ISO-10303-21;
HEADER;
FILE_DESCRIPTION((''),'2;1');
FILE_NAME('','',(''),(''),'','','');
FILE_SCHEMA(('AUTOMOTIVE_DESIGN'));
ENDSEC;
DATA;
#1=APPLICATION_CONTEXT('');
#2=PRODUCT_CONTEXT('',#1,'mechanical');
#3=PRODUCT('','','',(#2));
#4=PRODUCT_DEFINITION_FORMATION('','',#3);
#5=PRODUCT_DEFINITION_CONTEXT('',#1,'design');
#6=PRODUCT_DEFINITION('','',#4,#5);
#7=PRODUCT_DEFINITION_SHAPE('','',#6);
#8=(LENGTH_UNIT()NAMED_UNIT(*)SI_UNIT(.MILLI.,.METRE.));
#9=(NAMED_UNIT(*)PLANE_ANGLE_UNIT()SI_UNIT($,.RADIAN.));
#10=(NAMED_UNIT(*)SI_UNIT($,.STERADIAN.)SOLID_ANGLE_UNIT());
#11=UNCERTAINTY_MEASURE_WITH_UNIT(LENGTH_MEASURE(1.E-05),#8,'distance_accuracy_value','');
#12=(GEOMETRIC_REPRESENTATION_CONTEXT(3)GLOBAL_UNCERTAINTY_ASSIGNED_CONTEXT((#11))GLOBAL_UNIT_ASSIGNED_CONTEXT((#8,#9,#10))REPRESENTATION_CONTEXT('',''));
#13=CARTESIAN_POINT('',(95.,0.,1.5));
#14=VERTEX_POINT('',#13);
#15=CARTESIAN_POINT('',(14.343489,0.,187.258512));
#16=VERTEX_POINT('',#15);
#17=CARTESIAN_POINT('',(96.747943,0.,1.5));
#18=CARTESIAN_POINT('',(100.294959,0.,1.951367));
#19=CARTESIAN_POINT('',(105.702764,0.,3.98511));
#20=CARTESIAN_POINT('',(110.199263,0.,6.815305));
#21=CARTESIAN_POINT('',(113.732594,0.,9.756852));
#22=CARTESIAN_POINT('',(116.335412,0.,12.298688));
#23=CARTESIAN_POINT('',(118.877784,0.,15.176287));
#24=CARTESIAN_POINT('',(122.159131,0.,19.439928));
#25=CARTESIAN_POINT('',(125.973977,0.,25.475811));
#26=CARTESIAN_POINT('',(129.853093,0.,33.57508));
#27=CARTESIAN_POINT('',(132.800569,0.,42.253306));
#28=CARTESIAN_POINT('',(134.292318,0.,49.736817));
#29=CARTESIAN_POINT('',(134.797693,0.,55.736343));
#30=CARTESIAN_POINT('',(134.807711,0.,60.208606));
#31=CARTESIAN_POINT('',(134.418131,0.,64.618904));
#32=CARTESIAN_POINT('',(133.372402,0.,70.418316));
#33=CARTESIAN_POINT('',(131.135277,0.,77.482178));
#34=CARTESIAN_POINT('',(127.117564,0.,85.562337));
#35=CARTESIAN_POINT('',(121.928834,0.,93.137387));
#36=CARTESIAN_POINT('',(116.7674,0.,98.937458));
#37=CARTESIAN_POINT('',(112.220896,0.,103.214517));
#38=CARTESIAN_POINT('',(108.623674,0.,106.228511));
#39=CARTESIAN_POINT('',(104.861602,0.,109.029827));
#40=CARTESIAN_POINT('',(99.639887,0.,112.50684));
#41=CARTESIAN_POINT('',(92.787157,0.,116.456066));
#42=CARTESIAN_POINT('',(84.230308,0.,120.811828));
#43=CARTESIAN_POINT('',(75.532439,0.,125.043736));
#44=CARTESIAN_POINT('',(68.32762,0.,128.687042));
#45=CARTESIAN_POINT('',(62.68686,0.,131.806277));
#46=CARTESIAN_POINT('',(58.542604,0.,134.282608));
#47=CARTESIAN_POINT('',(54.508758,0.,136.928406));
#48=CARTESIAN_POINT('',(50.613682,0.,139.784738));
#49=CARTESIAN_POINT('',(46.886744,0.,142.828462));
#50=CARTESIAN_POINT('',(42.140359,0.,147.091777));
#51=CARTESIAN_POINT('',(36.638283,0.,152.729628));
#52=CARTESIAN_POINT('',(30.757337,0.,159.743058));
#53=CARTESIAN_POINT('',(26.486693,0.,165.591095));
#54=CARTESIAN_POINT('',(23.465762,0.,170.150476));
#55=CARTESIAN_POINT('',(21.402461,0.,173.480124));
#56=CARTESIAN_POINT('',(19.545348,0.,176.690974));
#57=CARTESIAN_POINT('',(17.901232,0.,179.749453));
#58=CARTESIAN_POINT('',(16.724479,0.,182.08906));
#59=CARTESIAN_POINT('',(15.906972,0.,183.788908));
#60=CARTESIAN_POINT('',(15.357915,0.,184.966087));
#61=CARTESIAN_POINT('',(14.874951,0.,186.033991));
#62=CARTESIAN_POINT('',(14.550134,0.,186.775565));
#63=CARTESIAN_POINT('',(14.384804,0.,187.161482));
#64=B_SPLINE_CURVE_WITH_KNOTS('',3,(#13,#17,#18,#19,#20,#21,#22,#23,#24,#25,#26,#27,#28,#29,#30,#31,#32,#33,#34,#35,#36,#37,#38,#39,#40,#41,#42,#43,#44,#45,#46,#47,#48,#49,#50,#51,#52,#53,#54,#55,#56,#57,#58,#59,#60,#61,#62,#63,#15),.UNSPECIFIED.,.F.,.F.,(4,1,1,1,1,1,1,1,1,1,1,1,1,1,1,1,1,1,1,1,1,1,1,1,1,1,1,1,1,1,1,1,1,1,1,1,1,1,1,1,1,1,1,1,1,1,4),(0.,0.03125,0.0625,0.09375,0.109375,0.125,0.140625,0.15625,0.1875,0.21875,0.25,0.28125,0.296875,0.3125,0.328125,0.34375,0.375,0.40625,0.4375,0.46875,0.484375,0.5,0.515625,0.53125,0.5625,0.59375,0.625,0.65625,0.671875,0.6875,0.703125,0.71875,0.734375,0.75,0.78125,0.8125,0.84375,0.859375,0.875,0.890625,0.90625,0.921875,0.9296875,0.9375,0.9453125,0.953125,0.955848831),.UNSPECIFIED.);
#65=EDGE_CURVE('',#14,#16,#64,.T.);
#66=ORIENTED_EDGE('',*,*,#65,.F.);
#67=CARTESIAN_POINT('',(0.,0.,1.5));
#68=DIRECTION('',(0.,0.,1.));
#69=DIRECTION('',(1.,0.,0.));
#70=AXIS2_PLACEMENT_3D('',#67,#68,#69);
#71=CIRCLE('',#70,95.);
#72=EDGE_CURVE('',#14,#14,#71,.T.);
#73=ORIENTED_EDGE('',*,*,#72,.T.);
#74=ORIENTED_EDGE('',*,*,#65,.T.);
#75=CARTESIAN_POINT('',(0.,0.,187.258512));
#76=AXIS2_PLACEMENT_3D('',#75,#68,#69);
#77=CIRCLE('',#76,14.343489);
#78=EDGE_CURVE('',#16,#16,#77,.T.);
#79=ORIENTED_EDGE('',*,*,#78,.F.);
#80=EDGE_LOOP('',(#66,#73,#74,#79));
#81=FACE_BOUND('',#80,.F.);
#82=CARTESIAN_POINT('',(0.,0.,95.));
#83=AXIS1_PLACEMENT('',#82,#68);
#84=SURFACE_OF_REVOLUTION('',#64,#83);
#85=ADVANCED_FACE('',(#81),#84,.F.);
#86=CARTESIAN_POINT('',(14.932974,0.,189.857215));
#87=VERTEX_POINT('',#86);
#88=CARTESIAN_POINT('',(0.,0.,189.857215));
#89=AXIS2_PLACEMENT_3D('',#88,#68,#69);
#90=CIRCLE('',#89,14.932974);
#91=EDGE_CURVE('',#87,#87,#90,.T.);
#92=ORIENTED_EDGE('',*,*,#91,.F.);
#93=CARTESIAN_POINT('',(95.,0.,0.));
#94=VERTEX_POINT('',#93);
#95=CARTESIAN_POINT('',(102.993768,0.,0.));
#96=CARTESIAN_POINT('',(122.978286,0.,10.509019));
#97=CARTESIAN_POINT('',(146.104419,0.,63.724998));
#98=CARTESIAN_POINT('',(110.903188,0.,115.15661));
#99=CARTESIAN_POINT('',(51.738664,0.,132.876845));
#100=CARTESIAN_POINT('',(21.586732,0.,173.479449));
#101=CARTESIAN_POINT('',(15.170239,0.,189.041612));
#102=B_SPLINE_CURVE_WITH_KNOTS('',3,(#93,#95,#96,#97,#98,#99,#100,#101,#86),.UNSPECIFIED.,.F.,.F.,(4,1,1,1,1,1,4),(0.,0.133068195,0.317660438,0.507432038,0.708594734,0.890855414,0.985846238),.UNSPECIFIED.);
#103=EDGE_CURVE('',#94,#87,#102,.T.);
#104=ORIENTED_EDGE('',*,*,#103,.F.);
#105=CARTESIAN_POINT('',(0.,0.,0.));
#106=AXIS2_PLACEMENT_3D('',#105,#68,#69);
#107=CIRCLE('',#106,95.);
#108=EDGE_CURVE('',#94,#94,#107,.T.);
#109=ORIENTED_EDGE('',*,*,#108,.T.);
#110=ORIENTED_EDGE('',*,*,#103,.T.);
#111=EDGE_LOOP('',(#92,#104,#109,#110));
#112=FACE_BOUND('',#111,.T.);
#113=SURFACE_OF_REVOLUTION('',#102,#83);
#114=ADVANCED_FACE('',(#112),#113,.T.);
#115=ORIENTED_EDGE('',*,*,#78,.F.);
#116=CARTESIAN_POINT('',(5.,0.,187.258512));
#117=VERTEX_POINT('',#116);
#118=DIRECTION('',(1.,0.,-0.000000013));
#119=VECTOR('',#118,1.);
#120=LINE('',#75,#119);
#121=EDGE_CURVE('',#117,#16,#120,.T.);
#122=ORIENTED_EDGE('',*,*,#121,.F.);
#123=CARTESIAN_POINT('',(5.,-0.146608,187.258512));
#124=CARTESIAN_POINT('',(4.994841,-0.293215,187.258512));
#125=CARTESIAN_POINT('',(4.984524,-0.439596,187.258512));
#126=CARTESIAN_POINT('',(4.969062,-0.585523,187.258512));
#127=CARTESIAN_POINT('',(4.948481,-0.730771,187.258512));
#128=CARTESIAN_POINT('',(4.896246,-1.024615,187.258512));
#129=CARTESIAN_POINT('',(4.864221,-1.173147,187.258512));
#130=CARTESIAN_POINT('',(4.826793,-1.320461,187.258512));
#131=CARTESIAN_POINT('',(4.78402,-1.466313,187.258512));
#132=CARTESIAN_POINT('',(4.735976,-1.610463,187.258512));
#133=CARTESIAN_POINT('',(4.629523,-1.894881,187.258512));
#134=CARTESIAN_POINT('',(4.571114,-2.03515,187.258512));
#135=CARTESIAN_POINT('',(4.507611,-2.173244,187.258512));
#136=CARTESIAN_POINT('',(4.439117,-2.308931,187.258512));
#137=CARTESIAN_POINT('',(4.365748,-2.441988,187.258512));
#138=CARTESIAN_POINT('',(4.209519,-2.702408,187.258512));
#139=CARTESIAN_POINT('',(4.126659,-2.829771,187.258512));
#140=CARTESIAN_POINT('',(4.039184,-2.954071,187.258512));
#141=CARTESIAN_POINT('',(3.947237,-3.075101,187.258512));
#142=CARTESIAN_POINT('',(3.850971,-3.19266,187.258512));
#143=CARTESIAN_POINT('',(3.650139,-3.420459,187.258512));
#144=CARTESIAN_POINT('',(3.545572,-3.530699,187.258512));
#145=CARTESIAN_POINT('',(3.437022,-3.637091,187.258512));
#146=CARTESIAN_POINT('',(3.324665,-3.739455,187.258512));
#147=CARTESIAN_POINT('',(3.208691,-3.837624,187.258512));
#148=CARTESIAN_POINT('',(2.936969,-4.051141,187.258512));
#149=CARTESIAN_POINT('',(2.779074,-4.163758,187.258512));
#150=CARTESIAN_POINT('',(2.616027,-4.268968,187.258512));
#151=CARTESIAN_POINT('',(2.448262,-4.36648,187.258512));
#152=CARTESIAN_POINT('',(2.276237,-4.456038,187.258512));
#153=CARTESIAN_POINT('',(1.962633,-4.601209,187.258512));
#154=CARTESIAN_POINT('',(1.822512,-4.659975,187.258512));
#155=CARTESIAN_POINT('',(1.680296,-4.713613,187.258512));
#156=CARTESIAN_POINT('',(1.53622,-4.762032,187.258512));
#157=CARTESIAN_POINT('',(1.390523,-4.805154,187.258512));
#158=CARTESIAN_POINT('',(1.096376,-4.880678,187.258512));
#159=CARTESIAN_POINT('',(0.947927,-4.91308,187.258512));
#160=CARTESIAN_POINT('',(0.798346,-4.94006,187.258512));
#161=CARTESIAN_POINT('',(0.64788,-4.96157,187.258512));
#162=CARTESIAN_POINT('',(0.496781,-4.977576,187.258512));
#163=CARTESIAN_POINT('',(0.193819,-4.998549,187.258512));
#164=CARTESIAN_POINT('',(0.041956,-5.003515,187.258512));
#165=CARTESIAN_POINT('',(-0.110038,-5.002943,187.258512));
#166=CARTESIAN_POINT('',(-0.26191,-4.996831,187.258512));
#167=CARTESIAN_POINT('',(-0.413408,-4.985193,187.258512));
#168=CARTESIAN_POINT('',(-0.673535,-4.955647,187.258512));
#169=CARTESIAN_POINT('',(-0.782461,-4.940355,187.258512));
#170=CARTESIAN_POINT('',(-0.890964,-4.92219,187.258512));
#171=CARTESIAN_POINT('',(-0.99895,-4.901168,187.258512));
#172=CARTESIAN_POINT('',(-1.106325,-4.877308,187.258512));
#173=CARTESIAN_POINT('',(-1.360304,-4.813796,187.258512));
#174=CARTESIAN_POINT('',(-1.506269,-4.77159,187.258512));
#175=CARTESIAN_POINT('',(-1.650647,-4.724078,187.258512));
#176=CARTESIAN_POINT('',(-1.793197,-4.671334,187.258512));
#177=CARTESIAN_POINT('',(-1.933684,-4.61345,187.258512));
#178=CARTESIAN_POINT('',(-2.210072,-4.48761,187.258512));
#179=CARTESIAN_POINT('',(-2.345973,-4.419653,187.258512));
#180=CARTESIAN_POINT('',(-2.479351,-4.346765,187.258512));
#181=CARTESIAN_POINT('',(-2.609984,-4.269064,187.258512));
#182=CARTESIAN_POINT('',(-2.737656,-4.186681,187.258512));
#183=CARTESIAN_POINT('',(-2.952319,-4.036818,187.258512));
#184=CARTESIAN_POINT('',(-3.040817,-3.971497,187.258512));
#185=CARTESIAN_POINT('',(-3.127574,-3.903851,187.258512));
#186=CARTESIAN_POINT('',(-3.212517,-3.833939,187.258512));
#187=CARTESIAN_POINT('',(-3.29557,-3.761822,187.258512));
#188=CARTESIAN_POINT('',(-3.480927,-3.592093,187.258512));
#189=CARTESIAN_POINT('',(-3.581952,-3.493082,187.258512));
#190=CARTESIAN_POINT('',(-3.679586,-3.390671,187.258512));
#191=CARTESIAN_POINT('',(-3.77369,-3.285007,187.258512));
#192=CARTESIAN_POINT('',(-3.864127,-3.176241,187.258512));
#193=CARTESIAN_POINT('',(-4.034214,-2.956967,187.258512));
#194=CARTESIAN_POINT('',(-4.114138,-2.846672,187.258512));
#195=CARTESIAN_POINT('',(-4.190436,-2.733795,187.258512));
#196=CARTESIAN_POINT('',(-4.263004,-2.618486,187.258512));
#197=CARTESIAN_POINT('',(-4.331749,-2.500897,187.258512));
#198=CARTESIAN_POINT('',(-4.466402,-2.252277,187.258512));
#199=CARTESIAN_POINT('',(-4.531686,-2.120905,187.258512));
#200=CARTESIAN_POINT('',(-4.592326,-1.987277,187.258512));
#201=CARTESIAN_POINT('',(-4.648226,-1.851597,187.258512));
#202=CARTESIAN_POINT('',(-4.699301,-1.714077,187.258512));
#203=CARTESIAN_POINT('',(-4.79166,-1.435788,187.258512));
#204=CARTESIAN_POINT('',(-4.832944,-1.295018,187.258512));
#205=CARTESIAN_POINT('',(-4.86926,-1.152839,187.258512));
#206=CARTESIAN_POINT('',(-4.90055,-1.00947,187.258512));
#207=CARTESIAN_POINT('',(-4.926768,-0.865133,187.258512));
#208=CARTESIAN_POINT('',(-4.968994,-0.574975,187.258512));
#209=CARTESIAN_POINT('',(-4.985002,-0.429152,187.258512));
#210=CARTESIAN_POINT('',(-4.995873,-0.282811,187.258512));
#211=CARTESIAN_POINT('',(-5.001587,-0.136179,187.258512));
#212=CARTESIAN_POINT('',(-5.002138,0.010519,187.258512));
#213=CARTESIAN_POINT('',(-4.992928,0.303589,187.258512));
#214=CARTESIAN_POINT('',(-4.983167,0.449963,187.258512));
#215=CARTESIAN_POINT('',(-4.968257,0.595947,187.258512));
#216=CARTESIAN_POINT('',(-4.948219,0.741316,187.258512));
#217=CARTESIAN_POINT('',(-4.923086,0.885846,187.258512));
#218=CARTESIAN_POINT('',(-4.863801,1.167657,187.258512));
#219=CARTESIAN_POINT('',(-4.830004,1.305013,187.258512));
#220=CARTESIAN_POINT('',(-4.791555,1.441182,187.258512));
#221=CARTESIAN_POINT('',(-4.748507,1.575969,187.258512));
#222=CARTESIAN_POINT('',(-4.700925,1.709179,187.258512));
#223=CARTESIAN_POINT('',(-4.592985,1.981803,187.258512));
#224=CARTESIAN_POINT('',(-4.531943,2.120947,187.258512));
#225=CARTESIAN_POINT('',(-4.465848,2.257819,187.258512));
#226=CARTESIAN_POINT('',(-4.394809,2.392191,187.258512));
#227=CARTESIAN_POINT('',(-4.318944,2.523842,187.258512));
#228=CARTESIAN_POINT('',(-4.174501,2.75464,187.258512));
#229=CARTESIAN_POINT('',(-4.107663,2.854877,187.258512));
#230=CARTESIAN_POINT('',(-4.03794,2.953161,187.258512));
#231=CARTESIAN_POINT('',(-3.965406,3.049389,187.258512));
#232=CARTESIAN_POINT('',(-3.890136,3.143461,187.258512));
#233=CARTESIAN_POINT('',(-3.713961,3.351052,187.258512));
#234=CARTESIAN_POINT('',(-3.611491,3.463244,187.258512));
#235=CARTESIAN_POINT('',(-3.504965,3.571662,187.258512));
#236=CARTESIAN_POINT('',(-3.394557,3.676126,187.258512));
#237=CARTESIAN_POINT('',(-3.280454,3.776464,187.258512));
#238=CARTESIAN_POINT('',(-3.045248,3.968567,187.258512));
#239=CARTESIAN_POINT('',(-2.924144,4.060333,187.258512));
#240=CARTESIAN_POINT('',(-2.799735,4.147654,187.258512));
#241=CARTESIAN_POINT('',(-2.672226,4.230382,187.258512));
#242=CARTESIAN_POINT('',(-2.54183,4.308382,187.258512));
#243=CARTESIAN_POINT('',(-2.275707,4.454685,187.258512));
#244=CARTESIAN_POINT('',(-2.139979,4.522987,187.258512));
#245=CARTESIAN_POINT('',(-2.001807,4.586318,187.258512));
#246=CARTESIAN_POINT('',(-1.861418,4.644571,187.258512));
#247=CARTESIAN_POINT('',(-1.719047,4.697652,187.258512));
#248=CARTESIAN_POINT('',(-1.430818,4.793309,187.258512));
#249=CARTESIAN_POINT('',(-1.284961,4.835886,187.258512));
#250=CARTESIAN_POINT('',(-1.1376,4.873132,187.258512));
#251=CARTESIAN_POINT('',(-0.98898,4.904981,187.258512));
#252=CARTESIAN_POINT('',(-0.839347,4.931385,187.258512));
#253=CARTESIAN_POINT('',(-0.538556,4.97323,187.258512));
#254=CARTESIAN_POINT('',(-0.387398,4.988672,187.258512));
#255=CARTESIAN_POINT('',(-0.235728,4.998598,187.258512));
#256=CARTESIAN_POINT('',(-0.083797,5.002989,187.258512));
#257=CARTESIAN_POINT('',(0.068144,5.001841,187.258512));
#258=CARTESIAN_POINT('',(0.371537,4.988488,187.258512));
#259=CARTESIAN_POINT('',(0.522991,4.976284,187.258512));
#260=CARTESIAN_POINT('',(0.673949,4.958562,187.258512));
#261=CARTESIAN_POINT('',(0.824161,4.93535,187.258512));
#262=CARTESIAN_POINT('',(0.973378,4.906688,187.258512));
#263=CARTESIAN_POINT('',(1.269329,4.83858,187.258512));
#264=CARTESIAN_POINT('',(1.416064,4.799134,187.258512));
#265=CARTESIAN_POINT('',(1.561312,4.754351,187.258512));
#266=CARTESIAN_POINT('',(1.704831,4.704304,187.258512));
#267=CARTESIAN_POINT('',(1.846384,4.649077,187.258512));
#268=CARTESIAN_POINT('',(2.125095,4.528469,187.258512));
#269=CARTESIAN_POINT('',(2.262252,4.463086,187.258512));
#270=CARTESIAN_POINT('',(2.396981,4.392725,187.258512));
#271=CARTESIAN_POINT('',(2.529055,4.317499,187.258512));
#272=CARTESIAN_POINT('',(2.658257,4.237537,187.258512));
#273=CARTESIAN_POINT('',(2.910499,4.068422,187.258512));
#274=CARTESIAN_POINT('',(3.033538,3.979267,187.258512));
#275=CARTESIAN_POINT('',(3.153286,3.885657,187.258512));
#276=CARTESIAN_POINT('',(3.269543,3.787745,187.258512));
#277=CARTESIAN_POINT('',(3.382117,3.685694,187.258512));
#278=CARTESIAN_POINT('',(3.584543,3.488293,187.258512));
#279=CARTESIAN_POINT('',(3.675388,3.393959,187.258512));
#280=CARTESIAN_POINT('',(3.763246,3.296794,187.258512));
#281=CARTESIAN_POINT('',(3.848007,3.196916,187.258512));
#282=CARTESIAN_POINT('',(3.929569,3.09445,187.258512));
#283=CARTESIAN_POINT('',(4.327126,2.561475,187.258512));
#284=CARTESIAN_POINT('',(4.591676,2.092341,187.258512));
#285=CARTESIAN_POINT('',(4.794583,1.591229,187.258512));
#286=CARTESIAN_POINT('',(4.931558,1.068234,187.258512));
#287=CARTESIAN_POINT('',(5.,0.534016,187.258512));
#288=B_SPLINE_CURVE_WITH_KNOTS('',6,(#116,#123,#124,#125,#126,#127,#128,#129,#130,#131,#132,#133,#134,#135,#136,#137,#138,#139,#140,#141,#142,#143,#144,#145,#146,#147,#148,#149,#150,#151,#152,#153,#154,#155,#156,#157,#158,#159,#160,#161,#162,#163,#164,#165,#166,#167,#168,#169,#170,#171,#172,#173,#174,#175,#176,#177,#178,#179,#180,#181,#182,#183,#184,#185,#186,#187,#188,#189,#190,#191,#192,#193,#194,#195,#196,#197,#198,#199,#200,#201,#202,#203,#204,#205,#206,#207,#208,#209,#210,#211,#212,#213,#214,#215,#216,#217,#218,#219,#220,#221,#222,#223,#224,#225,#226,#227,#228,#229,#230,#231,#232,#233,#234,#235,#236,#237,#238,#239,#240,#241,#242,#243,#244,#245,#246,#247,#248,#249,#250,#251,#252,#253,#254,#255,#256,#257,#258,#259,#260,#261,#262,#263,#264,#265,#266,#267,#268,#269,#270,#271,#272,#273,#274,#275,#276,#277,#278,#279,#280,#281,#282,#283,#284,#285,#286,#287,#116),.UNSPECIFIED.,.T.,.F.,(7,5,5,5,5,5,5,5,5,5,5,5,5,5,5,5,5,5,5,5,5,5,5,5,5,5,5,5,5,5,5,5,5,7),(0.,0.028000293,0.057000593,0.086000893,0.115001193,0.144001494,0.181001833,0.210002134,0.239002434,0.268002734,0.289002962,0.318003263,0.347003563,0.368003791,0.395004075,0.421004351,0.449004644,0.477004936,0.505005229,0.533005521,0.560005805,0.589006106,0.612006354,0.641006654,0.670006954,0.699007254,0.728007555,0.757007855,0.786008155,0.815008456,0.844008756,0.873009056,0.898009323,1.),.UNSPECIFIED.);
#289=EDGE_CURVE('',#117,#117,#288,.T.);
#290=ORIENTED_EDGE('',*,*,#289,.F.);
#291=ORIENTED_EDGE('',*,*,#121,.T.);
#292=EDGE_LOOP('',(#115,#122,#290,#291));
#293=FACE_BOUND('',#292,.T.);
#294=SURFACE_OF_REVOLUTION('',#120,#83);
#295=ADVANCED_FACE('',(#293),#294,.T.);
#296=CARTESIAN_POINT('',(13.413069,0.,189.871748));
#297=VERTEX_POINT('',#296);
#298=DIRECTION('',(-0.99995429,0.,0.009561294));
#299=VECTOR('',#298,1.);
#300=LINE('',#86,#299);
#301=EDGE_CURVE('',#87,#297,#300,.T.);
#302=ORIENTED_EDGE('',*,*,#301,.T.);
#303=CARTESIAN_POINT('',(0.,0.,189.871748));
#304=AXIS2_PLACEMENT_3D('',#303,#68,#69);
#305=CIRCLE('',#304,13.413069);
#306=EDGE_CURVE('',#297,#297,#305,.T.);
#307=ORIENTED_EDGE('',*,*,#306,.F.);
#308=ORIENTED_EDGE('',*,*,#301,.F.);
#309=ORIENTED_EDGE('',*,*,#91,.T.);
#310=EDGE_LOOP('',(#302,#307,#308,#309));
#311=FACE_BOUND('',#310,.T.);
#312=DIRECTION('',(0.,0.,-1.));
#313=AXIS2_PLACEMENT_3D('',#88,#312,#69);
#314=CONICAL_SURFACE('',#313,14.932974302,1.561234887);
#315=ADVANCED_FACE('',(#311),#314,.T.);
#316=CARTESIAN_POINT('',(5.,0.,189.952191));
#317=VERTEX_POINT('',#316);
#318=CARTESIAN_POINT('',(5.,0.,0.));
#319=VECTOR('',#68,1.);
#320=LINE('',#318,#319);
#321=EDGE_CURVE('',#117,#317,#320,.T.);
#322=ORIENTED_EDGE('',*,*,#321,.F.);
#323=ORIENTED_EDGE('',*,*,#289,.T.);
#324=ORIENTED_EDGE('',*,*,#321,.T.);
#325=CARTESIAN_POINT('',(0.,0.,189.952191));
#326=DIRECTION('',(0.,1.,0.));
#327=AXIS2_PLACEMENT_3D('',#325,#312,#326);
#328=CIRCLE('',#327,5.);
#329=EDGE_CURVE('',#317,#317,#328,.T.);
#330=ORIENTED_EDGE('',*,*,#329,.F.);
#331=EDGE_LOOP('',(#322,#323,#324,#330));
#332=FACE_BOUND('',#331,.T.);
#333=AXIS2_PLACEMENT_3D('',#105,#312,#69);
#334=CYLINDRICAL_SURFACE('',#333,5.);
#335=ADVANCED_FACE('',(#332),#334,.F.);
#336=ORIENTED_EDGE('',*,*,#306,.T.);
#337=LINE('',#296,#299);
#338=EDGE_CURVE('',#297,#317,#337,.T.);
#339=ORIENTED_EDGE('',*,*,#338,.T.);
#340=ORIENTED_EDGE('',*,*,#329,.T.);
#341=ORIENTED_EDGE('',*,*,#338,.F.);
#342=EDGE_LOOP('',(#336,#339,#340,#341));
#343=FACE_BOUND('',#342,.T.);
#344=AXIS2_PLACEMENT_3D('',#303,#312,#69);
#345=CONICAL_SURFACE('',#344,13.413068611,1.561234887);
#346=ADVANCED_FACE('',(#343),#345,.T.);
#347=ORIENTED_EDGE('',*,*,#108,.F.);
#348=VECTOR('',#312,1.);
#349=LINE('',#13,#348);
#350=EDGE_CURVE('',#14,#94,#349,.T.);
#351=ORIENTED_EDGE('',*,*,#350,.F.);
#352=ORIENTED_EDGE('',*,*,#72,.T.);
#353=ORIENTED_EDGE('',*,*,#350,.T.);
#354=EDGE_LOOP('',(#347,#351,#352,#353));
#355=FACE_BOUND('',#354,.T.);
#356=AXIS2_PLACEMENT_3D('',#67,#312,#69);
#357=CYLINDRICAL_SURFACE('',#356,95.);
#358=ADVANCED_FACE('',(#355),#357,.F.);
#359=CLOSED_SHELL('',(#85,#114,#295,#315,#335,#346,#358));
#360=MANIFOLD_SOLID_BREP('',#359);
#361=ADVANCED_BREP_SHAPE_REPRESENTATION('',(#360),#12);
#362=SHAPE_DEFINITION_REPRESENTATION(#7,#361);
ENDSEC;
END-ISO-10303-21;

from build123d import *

# Parameters (mm, degrees)
F2_R     = 5
F3_DEPTH = 190


# Not quite as in the source:
# - ends of sketch curves that miss each other by under 0.0002 mm in the source are joined
# - the dataset's text gives a spline's control points without its knots; the knots are read off the source's solid


with BuildPart() as f1:
    # F0 (on Front) → F1 (revolve)
    with BuildSketch(Plane.XZ):
        with BuildLine():
            add(Edge.make_bspline(
                [(14.343489442, 187.2585117817), (14.2663053439, 187.4397829938), (14.1386699731, 187.7433208578), (13.9782055627, 188.1338468778), (13.8503601173, 188.4522717968), (13.7404223582, 188.7337167397), (13.6480782433, 188.9785031818), (13.5727745992, 189.1878497286), (13.5218227918, 189.3405777709), (13.486624217, 189.4573270267), (13.4553131706, 189.5742320778), (13.4263798732, 189.7229286458), (13.4157782973, 189.8307461373), (13.4130686106, 189.8717478482)],
                knots=[0.9558488315, 0.9558488315, 0.9558488315, 0.9558488315, 0.9609375, 0.96484375, 0.96875, 0.97265625, 0.9765625, 0.98046875, 0.984375, 0.986328125, 0.98828125, 0.990234375, 0.991435478, 0.991435478, 0.991435478, 0.991435478], degree=3))
            Line((13.4130686106, 189.8717478482), (0, 190))
            Line((0, 190), (0, 187.2585119684))
            Line((0, 187.2585119684), (14.343489442, 187.2585117817))
        make_face()
        with BuildLine():
            Line((95, 1.5), (95, 0))
            add(Edge.make_bspline(
                [(95, 0), (102.9937684759, 0), (122.9782858305, 10.509018894), (146.1044192238, 63.7249983964), (110.903188037, 115.1566102385), (51.7386639276, 132.8768445949), (21.5867324694, 173.4794491758), (15.1702392688, 189.0416115021), (14.9329743018, 189.857214919)],
                knots=[0, 0, 0, 0, 0.1330681946, 0.3176604379, 0.5074320376, 0.7085947345, 0.890855414, 0.9858462379, 0.9858462379, 0.9858462379, 0.9858462379], degree=3))
            Line((14.9329743018, 189.857214919), (13.4130686106, 189.8717478482))
            add(Edge.make_bspline(
                [(14.343489442, 187.2585117817), (14.2663053439, 187.4397829938), (14.1386699731, 187.7433208578), (13.9782055627, 188.1338468778), (13.8503601173, 188.4522717968), (13.7404223582, 188.7337167397), (13.6480782433, 188.9785031818), (13.5727745992, 189.1878497286), (13.5218227918, 189.3405777709), (13.486624217, 189.4573270267), (13.4553131706, 189.5742320778), (13.4263798732, 189.7229286458), (13.4157782973, 189.8307461373), (13.4130686106, 189.8717478482)],
                knots=[0.9558488315, 0.9558488315, 0.9558488315, 0.9558488315, 0.9609375, 0.96484375, 0.96875, 0.97265625, 0.9765625, 0.98046875, 0.984375, 0.986328125, 0.98828125, 0.990234375, 0.991435478, 0.991435478, 0.991435478, 0.991435478], degree=3))
            add(Edge.make_bspline(
                [(95, 1.5), (96.7479430492, 1.5), (100.2949587316, 1.9513666821), (105.7027636538, 3.985109507), (110.1992630606, 6.8153047921), (113.7325944043, 9.756852486), (116.3354116002, 12.2986877618), (118.8777838254, 15.176286785), (122.1591309147, 19.4399280718), (125.9739770946, 25.4758105315), (129.8530929693, 33.5750797312), (132.8005688925, 42.2533063451), (134.2923182137, 49.7368174104), (134.7976929983, 55.7363427659), (134.8077110706, 60.2086058663), (134.4181314867, 64.6189038237), (133.3724015126, 70.4183161076), (131.135276859, 77.4821784136), (127.1175641166, 85.5623366075), (121.9288336105, 93.1373866772), (116.7673996067, 98.9374575455), (112.2208964662, 103.2145172586), (108.6236738978, 106.2285110467), (104.8616019453, 109.0298270168), (99.639886693, 112.5068396641), (92.7871573199, 116.4560655612), (84.230308329, 120.8118284241), (75.532439228, 125.0437356242), (68.3276201418, 128.6870421823), (62.6868600605, 131.8062774523), (58.5426038885, 134.2826081268), (54.5087578983, 136.9284057607), (50.61368212, 139.7847382003), (46.8867439194, 142.8284621522), (42.1403589284, 147.0917773063), (36.6382830935, 152.7296280562), (30.7573371698, 159.7430580915), (26.4866934663, 165.5910946534), (23.4657622797, 170.1504762164), (21.4024609611, 173.4801240847), (19.5453483028, 176.6909739923), (17.9012318978, 179.7494525127), (16.7244789843, 182.0890600998), (15.9069715459, 183.7889080719), (15.3579150044, 184.9660869804), (14.8749513381, 186.0339908377), (14.5501338582, 186.7755651345), (14.3848040767, 187.1614820298), (14.343489442, 187.2585117817)],
                knots=[0, 0, 0, 0, 0.03125, 0.0625, 0.09375, 0.109375, 0.125, 0.140625, 0.15625, 0.1875, 0.21875, 0.25, 0.28125, 0.296875, 0.3125, 0.328125, 0.34375, 0.375, 0.40625, 0.4375, 0.46875, 0.484375, 0.5, 0.515625, 0.53125, 0.5625, 0.59375, 0.625, 0.65625, 0.671875, 0.6875, 0.703125, 0.71875, 0.734375, 0.75, 0.78125, 0.8125, 0.84375, 0.859375, 0.875, 0.890625, 0.90625, 0.921875, 0.9296875, 0.9375, 0.9453125, 0.953125, 0.9558488315, 0.9558488315, 0.9558488315, 0.9558488315], degree=3))
        make_face()
    revolve(axis=Axis((0, 0, 95), (0, 0, 1)))

    # F2 (on Top) → F3 (cut)
    with BuildSketch(Plane.XY):
        Circle(F2_R)
    extrude(amount=F3_DEPTH, mode=Mode.SUBTRACT)


solid = f1.part
